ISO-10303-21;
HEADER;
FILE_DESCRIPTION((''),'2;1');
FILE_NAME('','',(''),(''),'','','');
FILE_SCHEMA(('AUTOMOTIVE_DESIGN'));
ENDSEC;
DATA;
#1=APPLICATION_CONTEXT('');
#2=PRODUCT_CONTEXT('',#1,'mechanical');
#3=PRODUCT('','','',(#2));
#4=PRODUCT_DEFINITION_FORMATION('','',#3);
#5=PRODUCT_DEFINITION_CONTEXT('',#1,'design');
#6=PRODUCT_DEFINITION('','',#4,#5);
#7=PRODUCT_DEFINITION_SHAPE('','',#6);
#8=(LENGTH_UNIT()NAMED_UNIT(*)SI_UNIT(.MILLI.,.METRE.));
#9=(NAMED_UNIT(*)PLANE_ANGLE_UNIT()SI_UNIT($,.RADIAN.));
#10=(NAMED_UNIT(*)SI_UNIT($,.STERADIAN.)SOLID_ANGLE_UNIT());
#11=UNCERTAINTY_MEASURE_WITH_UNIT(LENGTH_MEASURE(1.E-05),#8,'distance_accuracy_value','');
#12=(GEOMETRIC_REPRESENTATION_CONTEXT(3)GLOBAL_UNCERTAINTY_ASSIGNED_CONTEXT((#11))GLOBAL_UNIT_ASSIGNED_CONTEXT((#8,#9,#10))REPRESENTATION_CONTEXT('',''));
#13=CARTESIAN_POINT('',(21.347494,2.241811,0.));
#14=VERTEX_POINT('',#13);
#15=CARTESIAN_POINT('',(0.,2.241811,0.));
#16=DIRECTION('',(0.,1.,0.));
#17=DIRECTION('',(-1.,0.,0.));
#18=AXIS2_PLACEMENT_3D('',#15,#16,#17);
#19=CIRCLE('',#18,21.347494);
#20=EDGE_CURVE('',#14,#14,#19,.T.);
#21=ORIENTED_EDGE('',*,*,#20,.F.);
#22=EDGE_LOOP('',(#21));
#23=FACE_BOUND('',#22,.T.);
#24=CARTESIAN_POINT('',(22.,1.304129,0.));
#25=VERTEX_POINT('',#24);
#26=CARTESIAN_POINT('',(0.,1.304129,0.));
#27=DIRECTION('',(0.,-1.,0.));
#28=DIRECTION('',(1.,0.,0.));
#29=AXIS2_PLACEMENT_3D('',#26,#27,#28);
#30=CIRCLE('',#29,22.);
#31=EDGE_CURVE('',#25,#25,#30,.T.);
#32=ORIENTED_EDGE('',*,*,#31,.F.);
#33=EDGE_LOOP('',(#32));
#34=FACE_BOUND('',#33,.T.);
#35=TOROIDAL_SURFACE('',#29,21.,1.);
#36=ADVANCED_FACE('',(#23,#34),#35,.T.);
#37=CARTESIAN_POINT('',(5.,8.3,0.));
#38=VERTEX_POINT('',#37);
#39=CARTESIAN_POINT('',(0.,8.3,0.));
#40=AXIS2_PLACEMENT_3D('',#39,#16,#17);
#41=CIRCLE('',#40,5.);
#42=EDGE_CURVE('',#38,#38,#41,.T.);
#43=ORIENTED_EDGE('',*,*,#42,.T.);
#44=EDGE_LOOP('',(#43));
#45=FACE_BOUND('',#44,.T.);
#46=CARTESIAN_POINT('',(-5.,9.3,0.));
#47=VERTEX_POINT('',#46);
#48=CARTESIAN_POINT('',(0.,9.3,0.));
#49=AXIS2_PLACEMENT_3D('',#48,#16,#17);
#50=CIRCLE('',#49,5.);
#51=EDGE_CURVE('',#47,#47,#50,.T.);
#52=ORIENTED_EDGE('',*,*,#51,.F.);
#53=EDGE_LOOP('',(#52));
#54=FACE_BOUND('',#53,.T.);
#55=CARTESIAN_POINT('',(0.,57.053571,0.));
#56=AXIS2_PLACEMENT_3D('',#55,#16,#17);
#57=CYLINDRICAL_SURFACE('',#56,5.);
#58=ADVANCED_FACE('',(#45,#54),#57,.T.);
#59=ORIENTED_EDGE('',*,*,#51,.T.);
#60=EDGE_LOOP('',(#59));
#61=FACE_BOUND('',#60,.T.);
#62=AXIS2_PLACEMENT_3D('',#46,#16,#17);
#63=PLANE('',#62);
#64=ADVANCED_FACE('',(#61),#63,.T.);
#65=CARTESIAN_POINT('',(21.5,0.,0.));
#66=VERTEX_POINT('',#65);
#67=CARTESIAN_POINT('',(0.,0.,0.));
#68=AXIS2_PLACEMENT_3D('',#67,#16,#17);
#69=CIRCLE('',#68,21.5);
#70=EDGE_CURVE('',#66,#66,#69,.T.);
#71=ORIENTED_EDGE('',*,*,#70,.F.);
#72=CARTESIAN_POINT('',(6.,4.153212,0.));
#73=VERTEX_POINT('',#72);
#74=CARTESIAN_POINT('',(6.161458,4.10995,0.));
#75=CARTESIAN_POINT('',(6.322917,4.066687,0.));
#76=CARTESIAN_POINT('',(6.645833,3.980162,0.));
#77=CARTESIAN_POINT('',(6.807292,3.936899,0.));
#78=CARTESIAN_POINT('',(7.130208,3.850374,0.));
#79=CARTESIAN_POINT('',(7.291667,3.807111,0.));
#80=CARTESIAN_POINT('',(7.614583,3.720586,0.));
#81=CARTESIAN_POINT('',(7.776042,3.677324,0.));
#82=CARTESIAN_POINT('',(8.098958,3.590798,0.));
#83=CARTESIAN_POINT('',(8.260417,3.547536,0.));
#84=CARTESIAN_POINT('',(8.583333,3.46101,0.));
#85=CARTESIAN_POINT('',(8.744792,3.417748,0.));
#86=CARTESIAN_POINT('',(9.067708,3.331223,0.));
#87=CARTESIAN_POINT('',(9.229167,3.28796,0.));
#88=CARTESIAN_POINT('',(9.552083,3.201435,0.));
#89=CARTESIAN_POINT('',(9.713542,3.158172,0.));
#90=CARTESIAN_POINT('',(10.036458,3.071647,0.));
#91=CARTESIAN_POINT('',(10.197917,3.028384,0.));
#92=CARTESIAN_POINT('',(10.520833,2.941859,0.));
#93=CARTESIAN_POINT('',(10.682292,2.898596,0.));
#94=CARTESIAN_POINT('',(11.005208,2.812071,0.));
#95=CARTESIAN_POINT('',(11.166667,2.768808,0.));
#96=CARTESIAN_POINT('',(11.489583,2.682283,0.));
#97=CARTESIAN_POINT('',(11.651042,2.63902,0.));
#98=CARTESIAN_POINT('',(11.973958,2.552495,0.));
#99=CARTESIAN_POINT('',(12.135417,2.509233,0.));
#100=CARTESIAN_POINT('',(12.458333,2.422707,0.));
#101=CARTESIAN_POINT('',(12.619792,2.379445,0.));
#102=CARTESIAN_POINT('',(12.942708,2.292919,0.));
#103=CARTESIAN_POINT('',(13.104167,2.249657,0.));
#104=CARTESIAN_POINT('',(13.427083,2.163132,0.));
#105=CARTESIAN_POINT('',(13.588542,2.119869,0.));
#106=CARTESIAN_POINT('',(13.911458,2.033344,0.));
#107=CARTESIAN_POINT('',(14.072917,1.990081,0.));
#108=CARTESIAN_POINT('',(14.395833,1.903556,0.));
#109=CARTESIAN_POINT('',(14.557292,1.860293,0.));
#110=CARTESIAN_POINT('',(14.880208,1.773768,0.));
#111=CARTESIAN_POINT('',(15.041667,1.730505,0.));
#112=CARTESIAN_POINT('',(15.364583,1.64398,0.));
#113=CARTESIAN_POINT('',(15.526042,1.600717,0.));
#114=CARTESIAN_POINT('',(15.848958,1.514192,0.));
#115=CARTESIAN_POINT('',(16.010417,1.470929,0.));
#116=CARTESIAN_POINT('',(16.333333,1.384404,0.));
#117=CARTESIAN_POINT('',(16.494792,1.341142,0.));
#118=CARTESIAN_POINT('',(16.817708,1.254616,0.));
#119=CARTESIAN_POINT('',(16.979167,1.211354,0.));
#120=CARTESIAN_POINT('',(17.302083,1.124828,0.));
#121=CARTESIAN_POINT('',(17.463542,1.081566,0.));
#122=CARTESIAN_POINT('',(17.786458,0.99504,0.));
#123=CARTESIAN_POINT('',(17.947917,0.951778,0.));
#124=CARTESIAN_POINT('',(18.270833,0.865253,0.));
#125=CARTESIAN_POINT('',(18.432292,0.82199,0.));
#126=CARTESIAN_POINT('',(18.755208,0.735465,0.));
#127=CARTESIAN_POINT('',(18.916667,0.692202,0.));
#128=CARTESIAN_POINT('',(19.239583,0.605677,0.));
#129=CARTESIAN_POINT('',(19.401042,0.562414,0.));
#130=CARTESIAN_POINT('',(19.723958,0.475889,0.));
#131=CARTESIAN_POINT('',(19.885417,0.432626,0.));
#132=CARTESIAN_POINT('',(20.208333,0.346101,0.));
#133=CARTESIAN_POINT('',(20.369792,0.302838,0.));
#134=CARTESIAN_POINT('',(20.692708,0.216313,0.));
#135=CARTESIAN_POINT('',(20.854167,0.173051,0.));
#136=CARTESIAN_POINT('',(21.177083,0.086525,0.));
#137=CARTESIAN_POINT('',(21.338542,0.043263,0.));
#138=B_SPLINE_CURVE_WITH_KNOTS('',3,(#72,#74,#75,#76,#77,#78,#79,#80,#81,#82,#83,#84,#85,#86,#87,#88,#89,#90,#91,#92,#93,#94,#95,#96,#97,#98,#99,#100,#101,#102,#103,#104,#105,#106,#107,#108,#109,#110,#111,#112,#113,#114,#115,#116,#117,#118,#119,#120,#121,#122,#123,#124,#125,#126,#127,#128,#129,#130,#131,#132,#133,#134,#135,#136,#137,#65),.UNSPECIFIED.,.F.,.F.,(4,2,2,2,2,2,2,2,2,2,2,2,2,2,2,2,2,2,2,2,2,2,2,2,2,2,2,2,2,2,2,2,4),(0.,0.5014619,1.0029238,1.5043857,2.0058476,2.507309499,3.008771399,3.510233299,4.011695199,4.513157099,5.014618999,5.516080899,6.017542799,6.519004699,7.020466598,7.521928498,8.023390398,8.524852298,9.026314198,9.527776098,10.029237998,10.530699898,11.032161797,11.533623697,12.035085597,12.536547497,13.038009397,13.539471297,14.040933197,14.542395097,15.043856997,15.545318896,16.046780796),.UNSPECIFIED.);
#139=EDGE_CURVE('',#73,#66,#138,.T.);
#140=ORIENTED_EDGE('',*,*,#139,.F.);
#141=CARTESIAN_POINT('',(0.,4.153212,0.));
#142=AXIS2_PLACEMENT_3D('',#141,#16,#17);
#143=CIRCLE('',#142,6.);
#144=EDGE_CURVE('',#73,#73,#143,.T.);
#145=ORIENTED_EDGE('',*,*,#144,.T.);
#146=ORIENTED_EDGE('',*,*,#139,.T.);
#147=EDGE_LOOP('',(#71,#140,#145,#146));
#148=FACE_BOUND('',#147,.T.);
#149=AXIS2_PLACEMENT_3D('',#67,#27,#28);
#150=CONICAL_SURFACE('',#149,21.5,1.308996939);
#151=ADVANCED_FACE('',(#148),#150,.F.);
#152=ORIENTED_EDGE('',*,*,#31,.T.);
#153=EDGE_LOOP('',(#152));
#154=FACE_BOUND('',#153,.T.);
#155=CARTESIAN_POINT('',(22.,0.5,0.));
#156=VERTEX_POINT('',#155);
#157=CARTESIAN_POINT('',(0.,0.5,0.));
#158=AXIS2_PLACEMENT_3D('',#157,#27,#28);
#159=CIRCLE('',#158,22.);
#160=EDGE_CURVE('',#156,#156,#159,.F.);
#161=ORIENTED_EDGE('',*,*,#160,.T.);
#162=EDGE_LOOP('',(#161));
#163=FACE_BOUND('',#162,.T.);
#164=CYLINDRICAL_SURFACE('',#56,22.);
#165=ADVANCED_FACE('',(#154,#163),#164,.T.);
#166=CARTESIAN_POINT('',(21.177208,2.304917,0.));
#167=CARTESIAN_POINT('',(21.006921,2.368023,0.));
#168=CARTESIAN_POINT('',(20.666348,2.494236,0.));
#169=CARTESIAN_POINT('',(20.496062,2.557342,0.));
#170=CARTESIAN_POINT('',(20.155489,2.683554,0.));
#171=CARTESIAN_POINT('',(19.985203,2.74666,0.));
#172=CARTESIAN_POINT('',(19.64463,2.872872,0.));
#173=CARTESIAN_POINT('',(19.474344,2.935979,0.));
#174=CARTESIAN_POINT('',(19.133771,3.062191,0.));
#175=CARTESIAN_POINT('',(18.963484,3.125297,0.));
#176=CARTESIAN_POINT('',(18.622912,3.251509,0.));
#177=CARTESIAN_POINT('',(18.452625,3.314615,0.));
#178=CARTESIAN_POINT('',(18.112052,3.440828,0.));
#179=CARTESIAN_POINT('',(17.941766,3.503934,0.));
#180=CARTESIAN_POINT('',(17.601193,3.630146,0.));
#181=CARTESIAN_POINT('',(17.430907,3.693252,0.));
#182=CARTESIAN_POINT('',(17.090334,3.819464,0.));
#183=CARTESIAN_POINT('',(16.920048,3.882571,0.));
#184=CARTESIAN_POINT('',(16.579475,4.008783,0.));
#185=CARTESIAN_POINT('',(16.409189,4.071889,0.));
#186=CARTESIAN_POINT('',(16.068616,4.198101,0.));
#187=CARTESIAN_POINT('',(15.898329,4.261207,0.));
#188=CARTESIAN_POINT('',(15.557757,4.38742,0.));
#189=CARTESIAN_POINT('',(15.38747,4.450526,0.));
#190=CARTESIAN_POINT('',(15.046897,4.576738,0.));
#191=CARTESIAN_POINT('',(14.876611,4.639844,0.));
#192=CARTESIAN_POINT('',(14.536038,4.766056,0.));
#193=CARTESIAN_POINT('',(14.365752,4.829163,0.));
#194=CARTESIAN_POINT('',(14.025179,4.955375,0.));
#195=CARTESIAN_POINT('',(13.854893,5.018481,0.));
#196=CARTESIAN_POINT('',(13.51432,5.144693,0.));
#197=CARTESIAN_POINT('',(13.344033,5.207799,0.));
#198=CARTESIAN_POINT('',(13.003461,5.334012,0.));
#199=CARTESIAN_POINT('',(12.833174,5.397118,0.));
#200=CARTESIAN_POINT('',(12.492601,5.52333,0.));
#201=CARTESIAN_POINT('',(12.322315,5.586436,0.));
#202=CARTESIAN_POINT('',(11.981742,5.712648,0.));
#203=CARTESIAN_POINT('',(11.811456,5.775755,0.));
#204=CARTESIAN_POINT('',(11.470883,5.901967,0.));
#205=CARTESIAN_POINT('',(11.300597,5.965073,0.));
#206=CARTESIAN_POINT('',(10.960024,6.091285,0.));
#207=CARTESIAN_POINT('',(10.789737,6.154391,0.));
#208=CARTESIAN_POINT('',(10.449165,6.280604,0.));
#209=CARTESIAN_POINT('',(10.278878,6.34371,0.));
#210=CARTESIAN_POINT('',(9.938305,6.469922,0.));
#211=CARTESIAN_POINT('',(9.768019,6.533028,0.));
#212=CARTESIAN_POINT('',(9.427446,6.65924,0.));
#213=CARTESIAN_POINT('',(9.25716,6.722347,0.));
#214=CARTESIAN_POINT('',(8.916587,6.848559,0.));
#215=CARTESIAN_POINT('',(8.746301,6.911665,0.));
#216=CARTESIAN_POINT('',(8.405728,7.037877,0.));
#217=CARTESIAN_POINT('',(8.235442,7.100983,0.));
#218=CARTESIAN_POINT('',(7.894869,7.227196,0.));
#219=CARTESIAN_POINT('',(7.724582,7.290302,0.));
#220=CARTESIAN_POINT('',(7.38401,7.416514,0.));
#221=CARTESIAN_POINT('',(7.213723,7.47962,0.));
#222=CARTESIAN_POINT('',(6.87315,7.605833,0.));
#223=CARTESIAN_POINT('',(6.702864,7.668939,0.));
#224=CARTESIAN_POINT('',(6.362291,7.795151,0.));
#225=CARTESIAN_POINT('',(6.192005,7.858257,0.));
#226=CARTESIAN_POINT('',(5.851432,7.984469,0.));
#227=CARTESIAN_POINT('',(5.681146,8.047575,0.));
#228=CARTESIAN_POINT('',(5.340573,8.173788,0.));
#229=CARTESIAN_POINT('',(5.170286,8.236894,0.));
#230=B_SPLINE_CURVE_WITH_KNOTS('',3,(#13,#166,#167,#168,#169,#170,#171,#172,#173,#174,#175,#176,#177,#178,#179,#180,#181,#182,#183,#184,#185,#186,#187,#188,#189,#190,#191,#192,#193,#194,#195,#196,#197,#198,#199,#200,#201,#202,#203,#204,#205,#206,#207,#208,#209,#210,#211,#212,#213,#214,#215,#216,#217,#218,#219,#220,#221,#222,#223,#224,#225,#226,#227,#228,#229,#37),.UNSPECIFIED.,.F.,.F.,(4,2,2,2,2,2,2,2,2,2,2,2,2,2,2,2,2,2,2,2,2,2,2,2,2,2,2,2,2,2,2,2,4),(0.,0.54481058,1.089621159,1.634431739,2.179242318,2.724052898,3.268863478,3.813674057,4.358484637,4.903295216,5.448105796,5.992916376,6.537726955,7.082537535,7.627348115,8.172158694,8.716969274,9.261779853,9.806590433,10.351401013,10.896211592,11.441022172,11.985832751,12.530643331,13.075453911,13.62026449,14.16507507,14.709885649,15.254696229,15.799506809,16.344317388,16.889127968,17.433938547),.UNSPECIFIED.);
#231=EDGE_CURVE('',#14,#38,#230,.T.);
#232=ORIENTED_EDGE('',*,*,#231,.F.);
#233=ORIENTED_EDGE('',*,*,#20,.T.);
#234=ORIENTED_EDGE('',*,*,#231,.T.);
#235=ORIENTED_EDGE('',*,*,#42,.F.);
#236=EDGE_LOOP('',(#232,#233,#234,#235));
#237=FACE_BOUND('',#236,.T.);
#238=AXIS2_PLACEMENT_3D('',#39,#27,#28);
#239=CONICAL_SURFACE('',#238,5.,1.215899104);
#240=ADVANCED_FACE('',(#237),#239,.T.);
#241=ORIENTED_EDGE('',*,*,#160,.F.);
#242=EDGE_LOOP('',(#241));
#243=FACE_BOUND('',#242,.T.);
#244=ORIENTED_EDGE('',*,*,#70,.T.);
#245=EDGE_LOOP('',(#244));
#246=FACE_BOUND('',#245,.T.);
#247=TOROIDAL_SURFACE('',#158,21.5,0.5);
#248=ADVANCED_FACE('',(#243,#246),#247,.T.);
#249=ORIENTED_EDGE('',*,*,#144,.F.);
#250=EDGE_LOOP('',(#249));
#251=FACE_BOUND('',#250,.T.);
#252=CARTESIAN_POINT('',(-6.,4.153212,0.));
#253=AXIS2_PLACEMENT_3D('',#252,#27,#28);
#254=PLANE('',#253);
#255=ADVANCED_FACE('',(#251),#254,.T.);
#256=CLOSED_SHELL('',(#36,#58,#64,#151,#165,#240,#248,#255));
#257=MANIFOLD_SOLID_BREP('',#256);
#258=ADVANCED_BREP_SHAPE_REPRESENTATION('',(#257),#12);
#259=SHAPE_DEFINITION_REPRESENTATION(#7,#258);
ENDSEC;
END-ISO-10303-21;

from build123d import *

# Parameters (mm, degrees)
FILLET1_R = 1
FILLET2_R = 0.5


with BuildPart() as part:
    # Sketch1 → Revolve1 (revolve)
    with BuildSketch(Plane.XY):
        Polygon((-6, 4.153212483), (-21.5, 0), (-22, 0), (-22, 2), (-5, 8.3), (-5, 9.3), (0, 9.3), (0, 4.153212483), align=None)
    revolve(axis=Axis((0, 57.053571429, 0), (0, -1, 0)))

    # Fillet1
    fillet1_edges = [part.edges().sort_by_distance(p)[0] for p in [
        (22, 2, 0),
    ]]
    fillet(fillet1_edges, radius=FILLET1_R)

    # Fillet2
    fillet2_edges = [part.edges().sort_by_distance(p)[0] for p in [
        (22, 0, 0),
    ]]
    fillet(fillet2_edges, radius=FILLET2_R - 0.0001)  # a hair under: the kernel refuses the full size


solid = part.part
